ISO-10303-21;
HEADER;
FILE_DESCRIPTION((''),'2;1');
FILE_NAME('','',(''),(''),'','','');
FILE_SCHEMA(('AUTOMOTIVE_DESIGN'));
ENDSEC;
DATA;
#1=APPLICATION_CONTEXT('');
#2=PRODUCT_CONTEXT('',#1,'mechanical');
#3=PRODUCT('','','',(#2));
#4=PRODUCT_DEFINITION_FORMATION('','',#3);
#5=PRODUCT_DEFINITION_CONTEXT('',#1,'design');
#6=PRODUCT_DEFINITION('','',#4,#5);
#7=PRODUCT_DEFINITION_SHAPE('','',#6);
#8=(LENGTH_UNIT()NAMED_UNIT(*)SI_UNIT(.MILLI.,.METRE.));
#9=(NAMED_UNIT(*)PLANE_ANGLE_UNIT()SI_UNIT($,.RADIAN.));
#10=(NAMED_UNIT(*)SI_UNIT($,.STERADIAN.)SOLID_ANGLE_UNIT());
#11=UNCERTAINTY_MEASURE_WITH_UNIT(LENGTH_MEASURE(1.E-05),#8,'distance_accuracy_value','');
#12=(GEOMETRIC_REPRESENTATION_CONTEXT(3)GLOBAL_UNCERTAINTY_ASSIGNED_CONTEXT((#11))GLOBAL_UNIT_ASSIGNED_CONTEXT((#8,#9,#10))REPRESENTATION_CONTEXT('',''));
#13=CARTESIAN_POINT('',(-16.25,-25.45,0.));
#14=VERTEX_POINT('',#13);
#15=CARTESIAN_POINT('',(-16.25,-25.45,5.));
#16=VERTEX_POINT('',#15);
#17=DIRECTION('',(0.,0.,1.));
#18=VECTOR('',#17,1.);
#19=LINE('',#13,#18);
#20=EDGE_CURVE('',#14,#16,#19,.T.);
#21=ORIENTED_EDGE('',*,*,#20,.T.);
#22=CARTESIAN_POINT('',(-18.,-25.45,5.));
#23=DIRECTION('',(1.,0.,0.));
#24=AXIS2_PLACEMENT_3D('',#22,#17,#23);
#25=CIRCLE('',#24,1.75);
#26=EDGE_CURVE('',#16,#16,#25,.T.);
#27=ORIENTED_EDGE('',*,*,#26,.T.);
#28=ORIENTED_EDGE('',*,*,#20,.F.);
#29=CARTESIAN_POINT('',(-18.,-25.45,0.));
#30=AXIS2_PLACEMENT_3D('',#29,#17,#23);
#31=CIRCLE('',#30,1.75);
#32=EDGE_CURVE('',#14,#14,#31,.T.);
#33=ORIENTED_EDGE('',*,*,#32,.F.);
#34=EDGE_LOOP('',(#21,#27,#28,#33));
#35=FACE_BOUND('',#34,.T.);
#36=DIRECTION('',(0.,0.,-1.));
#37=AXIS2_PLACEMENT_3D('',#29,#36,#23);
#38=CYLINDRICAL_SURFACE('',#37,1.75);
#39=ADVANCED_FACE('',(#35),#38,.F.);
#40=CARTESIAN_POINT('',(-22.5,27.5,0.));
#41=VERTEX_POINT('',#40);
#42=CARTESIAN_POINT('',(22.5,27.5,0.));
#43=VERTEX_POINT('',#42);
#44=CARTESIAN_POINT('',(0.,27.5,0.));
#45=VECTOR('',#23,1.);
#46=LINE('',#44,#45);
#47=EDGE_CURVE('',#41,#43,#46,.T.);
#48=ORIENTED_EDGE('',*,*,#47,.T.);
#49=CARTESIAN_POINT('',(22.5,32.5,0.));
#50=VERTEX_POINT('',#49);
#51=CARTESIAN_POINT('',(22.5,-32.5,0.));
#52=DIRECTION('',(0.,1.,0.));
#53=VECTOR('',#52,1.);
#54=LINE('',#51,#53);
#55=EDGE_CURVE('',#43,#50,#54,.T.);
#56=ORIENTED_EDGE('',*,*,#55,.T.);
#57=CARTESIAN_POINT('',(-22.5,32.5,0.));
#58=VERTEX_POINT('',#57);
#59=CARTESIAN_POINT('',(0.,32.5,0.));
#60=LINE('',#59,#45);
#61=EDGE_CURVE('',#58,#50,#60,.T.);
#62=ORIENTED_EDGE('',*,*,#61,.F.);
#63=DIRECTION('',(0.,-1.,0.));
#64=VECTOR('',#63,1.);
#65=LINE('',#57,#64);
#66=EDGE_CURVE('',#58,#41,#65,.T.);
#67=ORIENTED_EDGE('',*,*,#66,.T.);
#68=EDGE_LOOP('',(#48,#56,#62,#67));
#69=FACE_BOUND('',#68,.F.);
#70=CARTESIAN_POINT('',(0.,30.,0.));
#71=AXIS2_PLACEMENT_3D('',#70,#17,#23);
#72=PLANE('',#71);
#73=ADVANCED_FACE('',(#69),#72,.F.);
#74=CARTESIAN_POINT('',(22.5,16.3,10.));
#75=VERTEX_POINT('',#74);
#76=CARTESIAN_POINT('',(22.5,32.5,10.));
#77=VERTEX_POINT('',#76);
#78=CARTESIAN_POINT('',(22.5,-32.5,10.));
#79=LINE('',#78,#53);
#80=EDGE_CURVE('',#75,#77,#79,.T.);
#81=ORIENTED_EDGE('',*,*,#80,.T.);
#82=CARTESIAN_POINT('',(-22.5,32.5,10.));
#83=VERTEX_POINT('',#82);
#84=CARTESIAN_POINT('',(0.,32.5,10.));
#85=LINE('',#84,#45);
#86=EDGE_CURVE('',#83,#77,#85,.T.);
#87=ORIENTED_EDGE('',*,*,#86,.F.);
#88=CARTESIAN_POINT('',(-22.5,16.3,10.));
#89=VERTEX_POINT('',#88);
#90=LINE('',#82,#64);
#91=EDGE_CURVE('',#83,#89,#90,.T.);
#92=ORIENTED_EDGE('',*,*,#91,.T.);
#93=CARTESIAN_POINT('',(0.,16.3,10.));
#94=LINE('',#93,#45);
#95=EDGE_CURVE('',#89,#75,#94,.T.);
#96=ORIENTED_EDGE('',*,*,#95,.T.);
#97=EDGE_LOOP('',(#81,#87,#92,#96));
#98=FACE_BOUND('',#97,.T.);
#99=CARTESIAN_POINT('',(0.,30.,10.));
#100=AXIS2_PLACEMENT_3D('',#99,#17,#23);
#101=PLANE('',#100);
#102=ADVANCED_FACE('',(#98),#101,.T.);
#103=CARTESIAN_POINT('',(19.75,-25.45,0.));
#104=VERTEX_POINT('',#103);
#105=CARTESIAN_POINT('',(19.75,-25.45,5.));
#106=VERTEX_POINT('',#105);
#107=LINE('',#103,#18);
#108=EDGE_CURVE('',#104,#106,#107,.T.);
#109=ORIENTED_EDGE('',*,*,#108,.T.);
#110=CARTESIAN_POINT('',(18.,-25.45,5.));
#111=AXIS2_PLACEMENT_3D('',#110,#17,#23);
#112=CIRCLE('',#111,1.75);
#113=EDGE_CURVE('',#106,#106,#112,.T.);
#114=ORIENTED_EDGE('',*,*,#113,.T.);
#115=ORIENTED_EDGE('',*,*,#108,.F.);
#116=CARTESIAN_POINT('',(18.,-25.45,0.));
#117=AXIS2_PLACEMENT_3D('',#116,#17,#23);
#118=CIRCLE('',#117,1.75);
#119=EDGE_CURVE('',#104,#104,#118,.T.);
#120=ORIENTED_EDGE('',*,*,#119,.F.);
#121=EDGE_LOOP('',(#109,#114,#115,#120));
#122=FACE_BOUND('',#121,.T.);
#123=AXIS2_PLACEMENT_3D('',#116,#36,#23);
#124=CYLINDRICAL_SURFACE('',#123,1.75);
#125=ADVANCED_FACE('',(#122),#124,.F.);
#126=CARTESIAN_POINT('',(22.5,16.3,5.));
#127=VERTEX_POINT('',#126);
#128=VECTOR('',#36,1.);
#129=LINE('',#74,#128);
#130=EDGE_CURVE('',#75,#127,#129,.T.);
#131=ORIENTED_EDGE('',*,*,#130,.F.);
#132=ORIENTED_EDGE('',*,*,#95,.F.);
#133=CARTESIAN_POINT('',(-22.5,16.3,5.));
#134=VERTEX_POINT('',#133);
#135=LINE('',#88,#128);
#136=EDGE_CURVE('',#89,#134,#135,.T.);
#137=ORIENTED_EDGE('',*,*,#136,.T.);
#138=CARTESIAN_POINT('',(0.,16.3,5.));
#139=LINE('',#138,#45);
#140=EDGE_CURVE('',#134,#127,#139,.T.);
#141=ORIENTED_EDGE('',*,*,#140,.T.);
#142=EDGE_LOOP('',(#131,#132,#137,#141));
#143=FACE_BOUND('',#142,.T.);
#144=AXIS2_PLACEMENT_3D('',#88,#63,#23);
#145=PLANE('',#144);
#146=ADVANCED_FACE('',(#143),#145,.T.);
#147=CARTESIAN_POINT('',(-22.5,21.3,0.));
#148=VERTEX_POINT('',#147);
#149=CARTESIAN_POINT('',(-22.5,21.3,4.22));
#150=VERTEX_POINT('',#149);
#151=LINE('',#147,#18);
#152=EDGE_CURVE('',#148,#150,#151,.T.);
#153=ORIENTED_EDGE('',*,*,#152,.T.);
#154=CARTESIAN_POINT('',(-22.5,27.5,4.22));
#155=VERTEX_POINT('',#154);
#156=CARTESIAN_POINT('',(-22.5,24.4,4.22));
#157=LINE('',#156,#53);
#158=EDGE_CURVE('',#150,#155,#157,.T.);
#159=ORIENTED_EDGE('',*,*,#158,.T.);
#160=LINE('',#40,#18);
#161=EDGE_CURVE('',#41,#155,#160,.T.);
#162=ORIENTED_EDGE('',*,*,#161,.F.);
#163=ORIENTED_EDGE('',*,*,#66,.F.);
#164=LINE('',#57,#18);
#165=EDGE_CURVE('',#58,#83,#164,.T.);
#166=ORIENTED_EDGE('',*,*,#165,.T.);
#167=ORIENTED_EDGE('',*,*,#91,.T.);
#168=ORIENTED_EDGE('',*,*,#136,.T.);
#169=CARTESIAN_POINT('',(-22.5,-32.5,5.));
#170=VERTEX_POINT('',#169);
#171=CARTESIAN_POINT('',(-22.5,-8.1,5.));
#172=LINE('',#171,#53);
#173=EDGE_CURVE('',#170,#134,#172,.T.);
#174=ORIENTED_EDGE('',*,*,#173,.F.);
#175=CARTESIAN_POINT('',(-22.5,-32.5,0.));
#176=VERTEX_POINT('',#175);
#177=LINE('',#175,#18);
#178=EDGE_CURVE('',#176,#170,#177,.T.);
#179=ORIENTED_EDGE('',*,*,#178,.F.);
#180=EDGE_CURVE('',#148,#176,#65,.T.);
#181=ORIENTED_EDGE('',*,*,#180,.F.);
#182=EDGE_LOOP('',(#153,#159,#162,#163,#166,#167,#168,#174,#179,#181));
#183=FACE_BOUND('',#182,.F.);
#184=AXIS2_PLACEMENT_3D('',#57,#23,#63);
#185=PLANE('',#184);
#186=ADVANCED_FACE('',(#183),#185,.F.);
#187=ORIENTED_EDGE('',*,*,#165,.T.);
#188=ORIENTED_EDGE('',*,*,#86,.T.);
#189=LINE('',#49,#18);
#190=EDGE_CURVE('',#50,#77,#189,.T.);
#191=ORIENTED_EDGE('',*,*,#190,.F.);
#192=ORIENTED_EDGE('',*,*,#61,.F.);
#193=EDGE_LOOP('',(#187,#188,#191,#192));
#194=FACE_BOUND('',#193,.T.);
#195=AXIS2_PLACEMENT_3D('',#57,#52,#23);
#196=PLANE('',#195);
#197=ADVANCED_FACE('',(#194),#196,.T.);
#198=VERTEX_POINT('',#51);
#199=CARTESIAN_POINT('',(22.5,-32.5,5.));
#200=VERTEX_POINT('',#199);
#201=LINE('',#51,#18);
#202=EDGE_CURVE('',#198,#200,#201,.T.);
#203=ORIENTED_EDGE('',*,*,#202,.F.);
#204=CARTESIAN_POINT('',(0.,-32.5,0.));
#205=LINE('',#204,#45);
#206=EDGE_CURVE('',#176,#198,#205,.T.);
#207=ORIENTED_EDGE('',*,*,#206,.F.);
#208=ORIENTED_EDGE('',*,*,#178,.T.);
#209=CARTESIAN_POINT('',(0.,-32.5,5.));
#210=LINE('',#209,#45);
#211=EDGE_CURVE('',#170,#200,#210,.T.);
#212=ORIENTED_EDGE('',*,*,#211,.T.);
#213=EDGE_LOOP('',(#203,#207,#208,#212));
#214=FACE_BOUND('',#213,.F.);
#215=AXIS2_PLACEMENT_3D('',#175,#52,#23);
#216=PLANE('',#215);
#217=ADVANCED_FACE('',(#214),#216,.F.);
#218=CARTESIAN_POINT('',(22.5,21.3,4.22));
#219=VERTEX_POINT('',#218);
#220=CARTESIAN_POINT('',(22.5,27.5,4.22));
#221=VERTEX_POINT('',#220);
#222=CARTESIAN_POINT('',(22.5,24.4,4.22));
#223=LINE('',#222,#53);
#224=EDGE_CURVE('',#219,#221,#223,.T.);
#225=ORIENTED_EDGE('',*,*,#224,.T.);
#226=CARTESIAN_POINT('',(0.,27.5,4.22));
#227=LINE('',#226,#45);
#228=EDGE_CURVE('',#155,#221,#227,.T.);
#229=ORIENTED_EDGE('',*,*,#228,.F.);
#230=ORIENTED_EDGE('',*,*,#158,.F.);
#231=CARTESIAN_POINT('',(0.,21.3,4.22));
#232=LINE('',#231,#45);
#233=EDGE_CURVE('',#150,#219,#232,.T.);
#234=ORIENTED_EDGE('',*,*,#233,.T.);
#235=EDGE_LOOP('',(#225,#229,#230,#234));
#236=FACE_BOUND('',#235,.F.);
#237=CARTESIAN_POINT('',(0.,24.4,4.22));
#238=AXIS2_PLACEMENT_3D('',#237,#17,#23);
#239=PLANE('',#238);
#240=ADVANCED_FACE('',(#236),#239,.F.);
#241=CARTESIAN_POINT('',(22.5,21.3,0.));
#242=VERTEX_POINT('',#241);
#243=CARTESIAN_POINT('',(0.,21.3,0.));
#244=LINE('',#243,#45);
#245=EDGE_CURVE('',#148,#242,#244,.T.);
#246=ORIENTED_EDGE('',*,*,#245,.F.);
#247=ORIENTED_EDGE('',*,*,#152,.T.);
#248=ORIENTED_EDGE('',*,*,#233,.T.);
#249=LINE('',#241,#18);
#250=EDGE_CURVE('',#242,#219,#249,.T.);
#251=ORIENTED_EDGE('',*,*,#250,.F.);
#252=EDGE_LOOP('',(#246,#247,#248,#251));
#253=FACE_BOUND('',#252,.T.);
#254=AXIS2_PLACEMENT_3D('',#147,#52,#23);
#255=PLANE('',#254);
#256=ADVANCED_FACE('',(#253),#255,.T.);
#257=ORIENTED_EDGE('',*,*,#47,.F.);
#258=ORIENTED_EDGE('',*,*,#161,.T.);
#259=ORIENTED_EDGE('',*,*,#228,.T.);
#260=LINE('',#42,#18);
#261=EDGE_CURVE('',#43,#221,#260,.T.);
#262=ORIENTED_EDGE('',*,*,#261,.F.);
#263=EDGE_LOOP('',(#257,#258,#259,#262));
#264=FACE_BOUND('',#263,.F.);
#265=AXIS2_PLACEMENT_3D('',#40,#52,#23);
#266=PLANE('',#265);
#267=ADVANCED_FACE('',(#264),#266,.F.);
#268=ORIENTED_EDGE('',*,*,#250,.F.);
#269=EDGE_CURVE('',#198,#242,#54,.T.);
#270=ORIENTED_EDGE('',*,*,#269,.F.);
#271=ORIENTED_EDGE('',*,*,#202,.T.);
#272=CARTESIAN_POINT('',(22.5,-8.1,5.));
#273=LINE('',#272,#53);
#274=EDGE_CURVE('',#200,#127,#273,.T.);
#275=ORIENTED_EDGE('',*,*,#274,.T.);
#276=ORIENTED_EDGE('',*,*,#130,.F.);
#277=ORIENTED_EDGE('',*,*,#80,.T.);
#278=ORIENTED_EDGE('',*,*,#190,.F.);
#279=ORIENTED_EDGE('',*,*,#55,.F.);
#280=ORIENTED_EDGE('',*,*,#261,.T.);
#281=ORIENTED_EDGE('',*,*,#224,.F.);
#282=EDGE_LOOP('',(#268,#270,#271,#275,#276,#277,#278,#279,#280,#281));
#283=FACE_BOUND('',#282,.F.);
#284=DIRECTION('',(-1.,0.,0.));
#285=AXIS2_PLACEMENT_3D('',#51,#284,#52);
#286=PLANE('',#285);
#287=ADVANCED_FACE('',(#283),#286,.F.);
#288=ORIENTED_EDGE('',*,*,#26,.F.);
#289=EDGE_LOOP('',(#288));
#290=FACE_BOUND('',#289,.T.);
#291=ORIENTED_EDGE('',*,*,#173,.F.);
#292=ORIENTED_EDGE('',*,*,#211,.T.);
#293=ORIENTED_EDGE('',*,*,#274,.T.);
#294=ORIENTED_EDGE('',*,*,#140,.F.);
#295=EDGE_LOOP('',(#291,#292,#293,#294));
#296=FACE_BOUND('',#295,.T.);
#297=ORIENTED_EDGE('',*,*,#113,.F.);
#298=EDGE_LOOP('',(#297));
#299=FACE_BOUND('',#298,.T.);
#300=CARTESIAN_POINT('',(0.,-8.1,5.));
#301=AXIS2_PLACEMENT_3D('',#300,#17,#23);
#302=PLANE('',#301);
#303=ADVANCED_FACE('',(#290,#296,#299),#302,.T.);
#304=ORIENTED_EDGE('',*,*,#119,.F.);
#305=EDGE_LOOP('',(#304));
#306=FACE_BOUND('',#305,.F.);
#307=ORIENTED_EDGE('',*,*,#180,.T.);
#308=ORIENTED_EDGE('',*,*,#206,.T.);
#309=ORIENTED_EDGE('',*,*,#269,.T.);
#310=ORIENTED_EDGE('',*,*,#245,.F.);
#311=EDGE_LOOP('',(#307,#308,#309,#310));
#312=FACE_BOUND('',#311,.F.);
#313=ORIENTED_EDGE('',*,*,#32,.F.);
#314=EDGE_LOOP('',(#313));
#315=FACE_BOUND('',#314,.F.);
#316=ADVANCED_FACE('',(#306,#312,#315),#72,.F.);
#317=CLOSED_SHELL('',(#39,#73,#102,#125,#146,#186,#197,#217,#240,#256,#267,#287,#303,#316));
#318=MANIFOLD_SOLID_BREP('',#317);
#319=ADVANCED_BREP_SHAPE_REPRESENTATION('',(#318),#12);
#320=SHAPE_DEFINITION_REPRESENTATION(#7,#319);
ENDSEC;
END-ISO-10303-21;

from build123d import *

# Parameters (mm, degrees)
F1_W     = 45
F1_H     = 5
F1_H_2   = 6.2
F1_H_3   = 53.8
F1_R     = 1.75
F2_DEPTH = 10
F3_DEPTH = 4.22
F4_W     = 45
F4_H     = 48.8
F4_R     = 1.75
F5_DEPTH = 5


# Not quite as in the source:
# - a feature of the source that left no trace in its solid (it failed there, or was rolled back) is left out


with BuildPart() as f2:
    # F1 (on Top) → F2 (new body)
    with BuildSketch(Plane.XY):
        with Locations((0, 30)):
            Rectangle(F1_W, F1_H)
        with Locations((0, 24.4)):
            Rectangle(F1_W, F1_H_2)
        with Locations((0, -5.6)):
            Rectangle(F1_W, F1_H_3)
        with Locations((-18, -25.45)):
            Circle(F1_R, mode=Mode.SUBTRACT)
        with Locations((18, -25.45)):
            Circle(F1_R, mode=Mode.SUBTRACT)
    extrude(amount=F2_DEPTH)

    # F1 (on Top) → F3 (cut)
    with BuildSketch(Plane.XY):
        with Locations((0, 24.4)):
            Rectangle(F1_W, F1_H_2)
    extrude(amount=F3_DEPTH, mode=Mode.SUBTRACT)

    # F4 (on face) → F5 (cut)
    with BuildSketch(Plane.XY.offset(10)):
        with Locations((0, -8.1)):
            Rectangle(F4_W, F4_H)
        with Locations((-18, -25.45)):
            Circle(F4_R, mode=Mode.SUBTRACT)
        with Locations((18, -25.45)):
            Circle(F4_R, mode=Mode.SUBTRACT)
    extrude(amount=-F5_DEPTH, mode=Mode.SUBTRACT)


solid = f2.part
